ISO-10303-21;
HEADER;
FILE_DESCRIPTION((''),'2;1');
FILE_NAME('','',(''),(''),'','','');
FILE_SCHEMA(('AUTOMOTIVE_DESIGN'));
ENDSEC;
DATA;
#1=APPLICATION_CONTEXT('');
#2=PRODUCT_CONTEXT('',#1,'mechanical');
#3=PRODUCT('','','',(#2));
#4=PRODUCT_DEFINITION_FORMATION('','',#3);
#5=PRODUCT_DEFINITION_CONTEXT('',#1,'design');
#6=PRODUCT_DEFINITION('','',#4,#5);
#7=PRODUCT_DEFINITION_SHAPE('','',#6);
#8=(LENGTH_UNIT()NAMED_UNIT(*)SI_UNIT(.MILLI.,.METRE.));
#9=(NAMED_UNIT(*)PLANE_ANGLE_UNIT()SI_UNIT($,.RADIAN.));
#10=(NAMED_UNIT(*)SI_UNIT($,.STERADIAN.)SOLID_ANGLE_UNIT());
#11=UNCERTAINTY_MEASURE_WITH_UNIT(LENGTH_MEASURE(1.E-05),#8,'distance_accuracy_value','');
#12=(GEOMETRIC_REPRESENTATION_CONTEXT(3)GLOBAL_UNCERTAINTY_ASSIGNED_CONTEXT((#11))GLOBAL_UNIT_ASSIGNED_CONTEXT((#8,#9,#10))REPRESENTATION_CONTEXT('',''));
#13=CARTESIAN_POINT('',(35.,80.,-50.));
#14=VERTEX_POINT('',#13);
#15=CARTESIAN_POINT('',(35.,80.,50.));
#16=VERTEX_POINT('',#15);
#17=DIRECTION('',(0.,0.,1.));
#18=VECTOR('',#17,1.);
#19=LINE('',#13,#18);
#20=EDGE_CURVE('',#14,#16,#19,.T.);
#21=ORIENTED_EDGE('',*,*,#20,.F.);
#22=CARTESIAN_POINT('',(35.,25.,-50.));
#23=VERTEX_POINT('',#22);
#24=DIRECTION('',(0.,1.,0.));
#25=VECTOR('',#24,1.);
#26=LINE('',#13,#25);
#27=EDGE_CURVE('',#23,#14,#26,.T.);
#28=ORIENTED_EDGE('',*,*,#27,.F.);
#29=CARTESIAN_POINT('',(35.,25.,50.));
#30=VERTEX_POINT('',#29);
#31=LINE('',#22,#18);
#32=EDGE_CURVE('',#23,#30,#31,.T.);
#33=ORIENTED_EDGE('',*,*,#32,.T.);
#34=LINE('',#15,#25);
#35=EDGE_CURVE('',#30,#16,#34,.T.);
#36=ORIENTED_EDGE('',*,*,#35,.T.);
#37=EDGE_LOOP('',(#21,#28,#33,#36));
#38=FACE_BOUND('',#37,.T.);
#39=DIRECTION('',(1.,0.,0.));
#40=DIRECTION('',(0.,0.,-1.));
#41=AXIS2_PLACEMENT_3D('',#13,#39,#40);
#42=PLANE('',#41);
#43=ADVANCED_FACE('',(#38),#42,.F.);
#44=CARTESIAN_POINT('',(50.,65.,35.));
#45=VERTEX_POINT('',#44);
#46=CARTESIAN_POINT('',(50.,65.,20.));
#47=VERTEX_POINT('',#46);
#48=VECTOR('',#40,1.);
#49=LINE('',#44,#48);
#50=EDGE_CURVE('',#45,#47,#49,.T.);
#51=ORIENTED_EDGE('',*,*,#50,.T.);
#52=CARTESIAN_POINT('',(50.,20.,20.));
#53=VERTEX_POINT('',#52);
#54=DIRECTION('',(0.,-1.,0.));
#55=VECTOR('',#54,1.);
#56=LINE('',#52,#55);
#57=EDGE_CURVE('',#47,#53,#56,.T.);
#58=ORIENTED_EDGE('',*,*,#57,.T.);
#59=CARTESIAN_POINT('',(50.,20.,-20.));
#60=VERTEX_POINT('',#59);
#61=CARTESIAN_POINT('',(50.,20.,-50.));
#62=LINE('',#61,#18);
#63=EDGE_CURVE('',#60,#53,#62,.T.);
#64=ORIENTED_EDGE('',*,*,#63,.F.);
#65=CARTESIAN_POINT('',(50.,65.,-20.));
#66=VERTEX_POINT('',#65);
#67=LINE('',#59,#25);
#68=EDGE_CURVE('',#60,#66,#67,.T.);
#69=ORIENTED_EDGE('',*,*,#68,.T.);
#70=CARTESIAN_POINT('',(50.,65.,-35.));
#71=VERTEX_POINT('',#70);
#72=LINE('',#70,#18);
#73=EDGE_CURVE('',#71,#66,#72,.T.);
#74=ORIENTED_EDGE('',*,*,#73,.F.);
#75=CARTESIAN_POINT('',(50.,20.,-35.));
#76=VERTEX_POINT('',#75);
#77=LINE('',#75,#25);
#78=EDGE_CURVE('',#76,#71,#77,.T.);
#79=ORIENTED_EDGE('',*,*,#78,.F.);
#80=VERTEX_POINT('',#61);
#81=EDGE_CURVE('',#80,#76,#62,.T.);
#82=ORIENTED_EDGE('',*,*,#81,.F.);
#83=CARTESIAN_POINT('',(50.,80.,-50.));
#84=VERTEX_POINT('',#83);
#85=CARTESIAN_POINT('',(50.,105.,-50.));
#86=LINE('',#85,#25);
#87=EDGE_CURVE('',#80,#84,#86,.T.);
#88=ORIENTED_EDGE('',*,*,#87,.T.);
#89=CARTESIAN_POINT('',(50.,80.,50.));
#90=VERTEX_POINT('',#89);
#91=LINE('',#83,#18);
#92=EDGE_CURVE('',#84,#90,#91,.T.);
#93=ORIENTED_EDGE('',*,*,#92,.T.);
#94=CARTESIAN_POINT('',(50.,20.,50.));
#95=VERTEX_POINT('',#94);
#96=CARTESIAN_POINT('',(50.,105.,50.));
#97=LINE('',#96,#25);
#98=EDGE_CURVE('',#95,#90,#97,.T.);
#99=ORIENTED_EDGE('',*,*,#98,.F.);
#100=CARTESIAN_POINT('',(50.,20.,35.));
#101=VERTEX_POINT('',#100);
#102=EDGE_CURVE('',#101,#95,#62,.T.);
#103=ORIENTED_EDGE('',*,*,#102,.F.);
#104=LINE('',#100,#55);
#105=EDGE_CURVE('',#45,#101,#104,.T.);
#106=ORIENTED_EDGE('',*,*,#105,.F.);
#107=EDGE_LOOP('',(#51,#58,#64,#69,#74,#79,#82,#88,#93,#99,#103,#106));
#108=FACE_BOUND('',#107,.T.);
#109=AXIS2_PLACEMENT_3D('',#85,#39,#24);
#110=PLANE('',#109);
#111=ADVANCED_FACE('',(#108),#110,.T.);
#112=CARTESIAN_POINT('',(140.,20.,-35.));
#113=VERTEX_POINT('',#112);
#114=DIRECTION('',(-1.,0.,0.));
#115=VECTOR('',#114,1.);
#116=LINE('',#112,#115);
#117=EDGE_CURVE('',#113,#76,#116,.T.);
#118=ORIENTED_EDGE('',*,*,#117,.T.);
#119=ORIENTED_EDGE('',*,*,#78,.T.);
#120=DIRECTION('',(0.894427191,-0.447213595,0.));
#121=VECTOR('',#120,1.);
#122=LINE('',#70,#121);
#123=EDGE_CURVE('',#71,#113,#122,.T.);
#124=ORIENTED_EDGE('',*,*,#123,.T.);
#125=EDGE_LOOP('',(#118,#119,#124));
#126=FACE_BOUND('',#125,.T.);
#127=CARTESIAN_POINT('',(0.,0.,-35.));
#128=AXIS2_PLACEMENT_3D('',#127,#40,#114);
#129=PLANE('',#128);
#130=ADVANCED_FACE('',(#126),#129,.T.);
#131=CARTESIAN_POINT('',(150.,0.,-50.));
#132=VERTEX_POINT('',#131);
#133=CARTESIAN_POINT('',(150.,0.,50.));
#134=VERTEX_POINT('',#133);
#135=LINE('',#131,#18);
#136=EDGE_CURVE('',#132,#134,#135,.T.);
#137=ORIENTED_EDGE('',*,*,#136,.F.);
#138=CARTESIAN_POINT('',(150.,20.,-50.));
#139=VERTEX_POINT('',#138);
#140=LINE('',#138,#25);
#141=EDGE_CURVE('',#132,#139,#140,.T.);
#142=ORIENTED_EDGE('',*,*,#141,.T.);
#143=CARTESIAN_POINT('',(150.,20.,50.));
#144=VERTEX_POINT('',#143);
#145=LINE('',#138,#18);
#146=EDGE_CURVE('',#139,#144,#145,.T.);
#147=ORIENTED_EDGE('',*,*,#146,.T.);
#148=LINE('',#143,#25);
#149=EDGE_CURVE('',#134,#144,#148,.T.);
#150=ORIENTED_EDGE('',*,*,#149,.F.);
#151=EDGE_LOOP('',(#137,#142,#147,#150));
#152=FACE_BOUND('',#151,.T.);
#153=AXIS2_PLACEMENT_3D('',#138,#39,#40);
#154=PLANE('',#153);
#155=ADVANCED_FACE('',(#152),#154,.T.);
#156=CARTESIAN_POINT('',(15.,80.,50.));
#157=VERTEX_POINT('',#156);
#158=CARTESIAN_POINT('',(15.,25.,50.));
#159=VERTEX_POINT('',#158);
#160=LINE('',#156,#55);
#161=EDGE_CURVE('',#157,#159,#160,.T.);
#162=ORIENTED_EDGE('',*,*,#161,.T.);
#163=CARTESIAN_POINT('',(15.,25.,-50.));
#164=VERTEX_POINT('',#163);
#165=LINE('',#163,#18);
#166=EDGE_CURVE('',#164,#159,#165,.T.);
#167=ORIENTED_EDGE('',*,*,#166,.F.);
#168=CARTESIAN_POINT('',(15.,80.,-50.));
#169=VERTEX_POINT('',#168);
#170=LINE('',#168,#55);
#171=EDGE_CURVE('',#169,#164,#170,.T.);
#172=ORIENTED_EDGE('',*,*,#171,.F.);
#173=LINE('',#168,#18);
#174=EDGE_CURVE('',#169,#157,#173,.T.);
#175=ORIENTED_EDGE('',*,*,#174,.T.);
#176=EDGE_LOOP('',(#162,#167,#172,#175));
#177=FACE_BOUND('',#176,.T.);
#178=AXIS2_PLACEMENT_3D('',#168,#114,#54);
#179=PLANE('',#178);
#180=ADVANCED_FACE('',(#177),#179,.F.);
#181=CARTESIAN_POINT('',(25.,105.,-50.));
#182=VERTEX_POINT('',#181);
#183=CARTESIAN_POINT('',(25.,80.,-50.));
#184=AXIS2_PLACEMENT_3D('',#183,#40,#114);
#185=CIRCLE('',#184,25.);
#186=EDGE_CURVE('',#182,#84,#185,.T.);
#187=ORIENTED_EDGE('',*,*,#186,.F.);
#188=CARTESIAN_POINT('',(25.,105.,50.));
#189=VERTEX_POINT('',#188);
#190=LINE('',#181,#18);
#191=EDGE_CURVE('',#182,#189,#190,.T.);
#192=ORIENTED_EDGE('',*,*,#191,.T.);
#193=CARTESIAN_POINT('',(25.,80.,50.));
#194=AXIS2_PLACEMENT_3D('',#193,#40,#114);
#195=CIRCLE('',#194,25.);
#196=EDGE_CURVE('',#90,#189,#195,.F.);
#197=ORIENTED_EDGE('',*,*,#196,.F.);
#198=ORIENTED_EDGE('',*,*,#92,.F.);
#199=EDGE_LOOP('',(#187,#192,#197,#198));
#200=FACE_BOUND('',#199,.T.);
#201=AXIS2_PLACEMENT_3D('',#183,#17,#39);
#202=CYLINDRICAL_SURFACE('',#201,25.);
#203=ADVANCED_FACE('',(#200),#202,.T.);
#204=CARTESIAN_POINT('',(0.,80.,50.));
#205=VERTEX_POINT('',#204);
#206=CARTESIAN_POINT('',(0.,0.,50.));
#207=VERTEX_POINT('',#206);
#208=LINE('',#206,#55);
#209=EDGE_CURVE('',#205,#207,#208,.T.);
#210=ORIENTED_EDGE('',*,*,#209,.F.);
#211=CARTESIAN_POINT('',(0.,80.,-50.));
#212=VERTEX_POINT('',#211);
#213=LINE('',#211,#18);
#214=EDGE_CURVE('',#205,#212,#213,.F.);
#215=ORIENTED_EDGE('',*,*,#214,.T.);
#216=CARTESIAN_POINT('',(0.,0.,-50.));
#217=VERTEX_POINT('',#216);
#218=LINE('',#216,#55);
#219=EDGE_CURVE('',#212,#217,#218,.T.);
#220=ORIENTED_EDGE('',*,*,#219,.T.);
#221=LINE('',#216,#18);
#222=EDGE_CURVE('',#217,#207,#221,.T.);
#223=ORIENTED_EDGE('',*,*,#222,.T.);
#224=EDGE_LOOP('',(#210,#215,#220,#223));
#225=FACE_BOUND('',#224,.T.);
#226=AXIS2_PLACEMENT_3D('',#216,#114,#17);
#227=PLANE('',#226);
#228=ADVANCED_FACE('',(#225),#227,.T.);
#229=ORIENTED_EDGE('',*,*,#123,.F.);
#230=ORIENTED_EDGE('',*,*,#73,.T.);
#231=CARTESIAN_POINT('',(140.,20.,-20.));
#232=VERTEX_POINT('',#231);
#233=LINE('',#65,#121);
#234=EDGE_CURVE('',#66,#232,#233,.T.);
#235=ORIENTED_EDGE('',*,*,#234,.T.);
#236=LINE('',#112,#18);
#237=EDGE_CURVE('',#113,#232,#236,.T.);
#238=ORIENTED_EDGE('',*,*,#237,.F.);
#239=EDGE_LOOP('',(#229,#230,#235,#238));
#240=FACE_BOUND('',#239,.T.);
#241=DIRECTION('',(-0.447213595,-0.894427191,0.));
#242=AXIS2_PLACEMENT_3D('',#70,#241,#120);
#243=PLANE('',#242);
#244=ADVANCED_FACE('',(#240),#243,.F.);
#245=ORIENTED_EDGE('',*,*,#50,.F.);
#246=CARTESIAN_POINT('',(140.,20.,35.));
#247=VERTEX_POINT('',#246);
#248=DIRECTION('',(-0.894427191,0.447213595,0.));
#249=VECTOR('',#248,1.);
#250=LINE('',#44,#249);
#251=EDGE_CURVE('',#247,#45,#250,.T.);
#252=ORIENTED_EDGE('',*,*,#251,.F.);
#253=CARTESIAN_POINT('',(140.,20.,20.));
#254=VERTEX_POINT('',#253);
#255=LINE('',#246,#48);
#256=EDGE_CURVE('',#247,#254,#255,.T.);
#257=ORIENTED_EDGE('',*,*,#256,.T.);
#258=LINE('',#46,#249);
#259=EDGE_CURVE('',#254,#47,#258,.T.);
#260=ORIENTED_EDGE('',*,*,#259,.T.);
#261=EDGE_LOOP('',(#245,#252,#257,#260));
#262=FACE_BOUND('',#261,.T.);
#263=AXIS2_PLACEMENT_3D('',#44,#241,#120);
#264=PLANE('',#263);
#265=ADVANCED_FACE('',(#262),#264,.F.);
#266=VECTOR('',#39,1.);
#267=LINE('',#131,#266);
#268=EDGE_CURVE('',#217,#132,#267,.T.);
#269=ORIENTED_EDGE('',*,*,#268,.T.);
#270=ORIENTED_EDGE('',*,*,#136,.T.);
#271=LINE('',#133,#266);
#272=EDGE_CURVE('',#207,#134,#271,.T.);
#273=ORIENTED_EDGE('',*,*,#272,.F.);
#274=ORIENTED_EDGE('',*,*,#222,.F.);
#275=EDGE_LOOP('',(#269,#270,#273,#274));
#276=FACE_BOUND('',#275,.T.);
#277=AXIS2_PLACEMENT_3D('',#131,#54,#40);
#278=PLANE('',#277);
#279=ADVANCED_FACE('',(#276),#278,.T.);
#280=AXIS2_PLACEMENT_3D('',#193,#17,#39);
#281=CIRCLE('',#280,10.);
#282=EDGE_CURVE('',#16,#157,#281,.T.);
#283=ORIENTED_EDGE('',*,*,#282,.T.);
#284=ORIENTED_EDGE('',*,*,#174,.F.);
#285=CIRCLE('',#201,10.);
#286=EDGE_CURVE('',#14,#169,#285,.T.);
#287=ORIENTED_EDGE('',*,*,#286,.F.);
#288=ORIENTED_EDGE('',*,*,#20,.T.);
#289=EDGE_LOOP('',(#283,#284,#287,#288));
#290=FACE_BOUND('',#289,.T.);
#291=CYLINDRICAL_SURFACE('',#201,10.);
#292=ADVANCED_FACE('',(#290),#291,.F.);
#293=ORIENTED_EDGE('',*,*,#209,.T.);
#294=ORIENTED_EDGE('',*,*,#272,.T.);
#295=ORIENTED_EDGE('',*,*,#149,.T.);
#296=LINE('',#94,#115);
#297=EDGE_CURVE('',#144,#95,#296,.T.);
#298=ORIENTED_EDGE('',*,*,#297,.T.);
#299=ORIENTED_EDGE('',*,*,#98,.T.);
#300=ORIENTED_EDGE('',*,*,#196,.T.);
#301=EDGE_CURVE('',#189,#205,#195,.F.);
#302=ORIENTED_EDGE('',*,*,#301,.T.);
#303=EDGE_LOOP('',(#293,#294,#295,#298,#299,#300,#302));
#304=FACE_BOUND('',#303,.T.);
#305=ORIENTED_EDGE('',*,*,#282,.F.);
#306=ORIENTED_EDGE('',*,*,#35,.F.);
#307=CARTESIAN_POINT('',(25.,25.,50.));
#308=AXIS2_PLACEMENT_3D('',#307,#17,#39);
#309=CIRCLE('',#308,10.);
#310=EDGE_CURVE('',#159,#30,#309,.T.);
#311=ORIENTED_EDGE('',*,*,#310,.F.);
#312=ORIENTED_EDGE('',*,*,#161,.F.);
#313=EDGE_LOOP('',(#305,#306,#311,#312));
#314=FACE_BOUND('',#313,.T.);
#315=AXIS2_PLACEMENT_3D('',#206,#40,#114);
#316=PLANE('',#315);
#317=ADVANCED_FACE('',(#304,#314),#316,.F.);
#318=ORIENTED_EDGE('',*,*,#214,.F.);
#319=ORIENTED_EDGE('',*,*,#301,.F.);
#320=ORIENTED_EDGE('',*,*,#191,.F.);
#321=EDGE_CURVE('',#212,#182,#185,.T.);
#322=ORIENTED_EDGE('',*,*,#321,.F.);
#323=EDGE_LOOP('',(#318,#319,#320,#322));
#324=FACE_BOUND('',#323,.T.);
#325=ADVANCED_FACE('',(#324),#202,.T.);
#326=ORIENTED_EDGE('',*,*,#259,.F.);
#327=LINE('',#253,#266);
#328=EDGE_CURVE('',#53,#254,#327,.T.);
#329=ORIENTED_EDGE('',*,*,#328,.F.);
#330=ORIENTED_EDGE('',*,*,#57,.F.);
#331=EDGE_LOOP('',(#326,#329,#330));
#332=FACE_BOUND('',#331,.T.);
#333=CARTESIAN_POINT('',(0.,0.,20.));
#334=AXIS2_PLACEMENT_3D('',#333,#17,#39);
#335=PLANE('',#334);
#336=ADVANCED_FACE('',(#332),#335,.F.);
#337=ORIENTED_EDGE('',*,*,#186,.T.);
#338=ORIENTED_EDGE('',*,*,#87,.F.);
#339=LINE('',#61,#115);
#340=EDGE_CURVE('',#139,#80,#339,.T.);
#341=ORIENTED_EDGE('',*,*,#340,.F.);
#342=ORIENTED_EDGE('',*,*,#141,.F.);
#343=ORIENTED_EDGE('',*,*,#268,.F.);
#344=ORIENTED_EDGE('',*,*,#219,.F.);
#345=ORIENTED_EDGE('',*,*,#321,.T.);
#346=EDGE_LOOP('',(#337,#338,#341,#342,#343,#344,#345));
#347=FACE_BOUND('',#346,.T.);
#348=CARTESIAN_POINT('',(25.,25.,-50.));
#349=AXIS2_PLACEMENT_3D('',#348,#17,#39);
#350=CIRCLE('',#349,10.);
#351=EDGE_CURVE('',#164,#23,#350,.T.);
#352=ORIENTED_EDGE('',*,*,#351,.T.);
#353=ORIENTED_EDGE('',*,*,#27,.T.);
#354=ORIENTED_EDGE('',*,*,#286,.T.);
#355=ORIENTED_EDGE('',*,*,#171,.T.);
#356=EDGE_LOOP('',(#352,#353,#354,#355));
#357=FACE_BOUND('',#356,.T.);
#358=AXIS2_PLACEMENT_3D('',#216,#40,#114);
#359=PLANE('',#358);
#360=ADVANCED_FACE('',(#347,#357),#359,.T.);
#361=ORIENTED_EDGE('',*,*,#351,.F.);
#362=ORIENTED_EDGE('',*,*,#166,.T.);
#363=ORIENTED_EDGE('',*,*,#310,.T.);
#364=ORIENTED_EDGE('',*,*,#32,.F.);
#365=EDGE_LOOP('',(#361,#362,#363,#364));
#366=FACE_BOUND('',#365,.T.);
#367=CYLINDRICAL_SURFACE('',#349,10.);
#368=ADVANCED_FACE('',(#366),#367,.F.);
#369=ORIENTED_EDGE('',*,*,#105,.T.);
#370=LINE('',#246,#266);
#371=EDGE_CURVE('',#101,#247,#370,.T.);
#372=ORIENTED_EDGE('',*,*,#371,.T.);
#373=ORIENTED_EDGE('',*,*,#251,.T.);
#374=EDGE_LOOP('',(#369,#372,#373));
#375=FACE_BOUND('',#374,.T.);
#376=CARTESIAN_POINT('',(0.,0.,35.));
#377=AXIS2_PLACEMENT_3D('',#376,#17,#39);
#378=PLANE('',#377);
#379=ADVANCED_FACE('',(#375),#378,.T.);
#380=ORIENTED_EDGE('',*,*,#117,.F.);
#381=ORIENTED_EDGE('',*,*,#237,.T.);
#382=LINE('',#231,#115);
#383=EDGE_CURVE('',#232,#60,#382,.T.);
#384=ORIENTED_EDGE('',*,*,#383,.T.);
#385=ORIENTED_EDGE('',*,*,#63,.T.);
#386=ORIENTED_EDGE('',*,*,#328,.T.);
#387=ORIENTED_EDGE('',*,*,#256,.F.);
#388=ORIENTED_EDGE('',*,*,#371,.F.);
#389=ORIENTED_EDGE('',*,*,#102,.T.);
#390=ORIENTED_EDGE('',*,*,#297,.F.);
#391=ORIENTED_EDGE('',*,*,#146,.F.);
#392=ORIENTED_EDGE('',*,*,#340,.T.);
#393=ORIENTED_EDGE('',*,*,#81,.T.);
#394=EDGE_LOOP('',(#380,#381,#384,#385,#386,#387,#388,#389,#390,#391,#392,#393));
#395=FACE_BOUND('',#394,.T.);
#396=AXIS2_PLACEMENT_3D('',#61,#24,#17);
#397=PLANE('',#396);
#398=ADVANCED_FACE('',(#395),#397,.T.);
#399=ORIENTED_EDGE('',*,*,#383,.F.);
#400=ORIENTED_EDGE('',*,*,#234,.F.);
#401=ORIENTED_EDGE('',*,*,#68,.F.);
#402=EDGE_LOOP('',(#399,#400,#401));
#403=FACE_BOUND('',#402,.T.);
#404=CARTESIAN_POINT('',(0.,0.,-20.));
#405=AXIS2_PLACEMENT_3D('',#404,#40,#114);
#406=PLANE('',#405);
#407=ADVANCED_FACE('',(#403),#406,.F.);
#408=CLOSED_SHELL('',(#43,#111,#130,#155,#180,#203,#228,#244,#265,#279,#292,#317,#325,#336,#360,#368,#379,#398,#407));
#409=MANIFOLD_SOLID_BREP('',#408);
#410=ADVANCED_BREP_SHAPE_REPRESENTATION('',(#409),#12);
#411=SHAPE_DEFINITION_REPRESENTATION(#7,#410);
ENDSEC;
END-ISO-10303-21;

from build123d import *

# Parameters (mm, degrees)
BOSS_EXTRUDE1_DEPTH      = 50
BOSS_EXTRUDE1_DEPTH_BACK = 50
FILLET5_R                = 25
FILLET4_R                = 25
CUT_EXTRUDE1_DEPTH       = 209.62646045
BOSS_EXTRUDE2_START      = 20
BOSS_EXTRUDE2_DEPTH      = 15
BOSS_EXTRUDE3_START      = 40
BOSS_EXTRUDE3_DEPTH      = 15


with BuildPart() as part:
    # Sketch1 → Boss-Extrude1 (new, two sides: drawn at the far end of the back side and taken through both)
    with BuildSketch(Plane.XY.offset(-BOSS_EXTRUDE1_DEPTH_BACK)):
        Polygon((0, 0), (0, 105), (50, 105), (50, 20), (150, 20), (150, 0), align=None)
    extrude(amount=BOSS_EXTRUDE1_DEPTH + BOSS_EXTRUDE1_DEPTH_BACK)

    # Fillet5
    fillet5_edges = [part.edges().sort_by_distance(p)[0] for p in [
        (0, 105, 0),
    ]]
    fillet(fillet5_edges, radius=FILLET5_R)

    # Fillet4
    fillet4_edges = [part.edges().sort_by_distance(p)[0] for p in [
        (50, 105, 0),
    ]]
    fillet(fillet4_edges, radius=FILLET4_R - 0.0001)  # a hair under: the kernel refuses the full size

    # Sketch3 → Cut-Extrude1 (cut, through all)
    with BuildSketch(Plane.XY.offset(50)):
        with BuildLine():
            Line((35, 80), (35, 25))
            ThreePointArc((35, 25), (25, 15), (15, 25))
            Line((15, 25), (15, 80))
            ThreePointArc((15, 80), (25, 90), (35, 80))
        make_face()
    extrude(amount=-CUT_EXTRUDE1_DEPTH, mode=Mode.SUBTRACT)

    # Sketch5 → Boss-Extrude2 (add)
    with BuildSketch(Plane.XY.offset(BOSS_EXTRUDE2_START)):
        Polygon((50, 65), (140, 20), (50, 20), align=None)
    extrude(amount=BOSS_EXTRUDE2_DEPTH)

    # Sketch9 → Boss-Extrude3 (add)
    with BuildSketch(Plane(origin=(0, 0, 20), x_dir=(-1, 0, 0), z_dir=(0, 0, -1)).offset(BOSS_EXTRUDE3_START)):
        Polygon((-50, 20), (-50, 65), (-140, 20), align=None)
    extrude(amount=BOSS_EXTRUDE3_DEPTH)


solid = part.part
